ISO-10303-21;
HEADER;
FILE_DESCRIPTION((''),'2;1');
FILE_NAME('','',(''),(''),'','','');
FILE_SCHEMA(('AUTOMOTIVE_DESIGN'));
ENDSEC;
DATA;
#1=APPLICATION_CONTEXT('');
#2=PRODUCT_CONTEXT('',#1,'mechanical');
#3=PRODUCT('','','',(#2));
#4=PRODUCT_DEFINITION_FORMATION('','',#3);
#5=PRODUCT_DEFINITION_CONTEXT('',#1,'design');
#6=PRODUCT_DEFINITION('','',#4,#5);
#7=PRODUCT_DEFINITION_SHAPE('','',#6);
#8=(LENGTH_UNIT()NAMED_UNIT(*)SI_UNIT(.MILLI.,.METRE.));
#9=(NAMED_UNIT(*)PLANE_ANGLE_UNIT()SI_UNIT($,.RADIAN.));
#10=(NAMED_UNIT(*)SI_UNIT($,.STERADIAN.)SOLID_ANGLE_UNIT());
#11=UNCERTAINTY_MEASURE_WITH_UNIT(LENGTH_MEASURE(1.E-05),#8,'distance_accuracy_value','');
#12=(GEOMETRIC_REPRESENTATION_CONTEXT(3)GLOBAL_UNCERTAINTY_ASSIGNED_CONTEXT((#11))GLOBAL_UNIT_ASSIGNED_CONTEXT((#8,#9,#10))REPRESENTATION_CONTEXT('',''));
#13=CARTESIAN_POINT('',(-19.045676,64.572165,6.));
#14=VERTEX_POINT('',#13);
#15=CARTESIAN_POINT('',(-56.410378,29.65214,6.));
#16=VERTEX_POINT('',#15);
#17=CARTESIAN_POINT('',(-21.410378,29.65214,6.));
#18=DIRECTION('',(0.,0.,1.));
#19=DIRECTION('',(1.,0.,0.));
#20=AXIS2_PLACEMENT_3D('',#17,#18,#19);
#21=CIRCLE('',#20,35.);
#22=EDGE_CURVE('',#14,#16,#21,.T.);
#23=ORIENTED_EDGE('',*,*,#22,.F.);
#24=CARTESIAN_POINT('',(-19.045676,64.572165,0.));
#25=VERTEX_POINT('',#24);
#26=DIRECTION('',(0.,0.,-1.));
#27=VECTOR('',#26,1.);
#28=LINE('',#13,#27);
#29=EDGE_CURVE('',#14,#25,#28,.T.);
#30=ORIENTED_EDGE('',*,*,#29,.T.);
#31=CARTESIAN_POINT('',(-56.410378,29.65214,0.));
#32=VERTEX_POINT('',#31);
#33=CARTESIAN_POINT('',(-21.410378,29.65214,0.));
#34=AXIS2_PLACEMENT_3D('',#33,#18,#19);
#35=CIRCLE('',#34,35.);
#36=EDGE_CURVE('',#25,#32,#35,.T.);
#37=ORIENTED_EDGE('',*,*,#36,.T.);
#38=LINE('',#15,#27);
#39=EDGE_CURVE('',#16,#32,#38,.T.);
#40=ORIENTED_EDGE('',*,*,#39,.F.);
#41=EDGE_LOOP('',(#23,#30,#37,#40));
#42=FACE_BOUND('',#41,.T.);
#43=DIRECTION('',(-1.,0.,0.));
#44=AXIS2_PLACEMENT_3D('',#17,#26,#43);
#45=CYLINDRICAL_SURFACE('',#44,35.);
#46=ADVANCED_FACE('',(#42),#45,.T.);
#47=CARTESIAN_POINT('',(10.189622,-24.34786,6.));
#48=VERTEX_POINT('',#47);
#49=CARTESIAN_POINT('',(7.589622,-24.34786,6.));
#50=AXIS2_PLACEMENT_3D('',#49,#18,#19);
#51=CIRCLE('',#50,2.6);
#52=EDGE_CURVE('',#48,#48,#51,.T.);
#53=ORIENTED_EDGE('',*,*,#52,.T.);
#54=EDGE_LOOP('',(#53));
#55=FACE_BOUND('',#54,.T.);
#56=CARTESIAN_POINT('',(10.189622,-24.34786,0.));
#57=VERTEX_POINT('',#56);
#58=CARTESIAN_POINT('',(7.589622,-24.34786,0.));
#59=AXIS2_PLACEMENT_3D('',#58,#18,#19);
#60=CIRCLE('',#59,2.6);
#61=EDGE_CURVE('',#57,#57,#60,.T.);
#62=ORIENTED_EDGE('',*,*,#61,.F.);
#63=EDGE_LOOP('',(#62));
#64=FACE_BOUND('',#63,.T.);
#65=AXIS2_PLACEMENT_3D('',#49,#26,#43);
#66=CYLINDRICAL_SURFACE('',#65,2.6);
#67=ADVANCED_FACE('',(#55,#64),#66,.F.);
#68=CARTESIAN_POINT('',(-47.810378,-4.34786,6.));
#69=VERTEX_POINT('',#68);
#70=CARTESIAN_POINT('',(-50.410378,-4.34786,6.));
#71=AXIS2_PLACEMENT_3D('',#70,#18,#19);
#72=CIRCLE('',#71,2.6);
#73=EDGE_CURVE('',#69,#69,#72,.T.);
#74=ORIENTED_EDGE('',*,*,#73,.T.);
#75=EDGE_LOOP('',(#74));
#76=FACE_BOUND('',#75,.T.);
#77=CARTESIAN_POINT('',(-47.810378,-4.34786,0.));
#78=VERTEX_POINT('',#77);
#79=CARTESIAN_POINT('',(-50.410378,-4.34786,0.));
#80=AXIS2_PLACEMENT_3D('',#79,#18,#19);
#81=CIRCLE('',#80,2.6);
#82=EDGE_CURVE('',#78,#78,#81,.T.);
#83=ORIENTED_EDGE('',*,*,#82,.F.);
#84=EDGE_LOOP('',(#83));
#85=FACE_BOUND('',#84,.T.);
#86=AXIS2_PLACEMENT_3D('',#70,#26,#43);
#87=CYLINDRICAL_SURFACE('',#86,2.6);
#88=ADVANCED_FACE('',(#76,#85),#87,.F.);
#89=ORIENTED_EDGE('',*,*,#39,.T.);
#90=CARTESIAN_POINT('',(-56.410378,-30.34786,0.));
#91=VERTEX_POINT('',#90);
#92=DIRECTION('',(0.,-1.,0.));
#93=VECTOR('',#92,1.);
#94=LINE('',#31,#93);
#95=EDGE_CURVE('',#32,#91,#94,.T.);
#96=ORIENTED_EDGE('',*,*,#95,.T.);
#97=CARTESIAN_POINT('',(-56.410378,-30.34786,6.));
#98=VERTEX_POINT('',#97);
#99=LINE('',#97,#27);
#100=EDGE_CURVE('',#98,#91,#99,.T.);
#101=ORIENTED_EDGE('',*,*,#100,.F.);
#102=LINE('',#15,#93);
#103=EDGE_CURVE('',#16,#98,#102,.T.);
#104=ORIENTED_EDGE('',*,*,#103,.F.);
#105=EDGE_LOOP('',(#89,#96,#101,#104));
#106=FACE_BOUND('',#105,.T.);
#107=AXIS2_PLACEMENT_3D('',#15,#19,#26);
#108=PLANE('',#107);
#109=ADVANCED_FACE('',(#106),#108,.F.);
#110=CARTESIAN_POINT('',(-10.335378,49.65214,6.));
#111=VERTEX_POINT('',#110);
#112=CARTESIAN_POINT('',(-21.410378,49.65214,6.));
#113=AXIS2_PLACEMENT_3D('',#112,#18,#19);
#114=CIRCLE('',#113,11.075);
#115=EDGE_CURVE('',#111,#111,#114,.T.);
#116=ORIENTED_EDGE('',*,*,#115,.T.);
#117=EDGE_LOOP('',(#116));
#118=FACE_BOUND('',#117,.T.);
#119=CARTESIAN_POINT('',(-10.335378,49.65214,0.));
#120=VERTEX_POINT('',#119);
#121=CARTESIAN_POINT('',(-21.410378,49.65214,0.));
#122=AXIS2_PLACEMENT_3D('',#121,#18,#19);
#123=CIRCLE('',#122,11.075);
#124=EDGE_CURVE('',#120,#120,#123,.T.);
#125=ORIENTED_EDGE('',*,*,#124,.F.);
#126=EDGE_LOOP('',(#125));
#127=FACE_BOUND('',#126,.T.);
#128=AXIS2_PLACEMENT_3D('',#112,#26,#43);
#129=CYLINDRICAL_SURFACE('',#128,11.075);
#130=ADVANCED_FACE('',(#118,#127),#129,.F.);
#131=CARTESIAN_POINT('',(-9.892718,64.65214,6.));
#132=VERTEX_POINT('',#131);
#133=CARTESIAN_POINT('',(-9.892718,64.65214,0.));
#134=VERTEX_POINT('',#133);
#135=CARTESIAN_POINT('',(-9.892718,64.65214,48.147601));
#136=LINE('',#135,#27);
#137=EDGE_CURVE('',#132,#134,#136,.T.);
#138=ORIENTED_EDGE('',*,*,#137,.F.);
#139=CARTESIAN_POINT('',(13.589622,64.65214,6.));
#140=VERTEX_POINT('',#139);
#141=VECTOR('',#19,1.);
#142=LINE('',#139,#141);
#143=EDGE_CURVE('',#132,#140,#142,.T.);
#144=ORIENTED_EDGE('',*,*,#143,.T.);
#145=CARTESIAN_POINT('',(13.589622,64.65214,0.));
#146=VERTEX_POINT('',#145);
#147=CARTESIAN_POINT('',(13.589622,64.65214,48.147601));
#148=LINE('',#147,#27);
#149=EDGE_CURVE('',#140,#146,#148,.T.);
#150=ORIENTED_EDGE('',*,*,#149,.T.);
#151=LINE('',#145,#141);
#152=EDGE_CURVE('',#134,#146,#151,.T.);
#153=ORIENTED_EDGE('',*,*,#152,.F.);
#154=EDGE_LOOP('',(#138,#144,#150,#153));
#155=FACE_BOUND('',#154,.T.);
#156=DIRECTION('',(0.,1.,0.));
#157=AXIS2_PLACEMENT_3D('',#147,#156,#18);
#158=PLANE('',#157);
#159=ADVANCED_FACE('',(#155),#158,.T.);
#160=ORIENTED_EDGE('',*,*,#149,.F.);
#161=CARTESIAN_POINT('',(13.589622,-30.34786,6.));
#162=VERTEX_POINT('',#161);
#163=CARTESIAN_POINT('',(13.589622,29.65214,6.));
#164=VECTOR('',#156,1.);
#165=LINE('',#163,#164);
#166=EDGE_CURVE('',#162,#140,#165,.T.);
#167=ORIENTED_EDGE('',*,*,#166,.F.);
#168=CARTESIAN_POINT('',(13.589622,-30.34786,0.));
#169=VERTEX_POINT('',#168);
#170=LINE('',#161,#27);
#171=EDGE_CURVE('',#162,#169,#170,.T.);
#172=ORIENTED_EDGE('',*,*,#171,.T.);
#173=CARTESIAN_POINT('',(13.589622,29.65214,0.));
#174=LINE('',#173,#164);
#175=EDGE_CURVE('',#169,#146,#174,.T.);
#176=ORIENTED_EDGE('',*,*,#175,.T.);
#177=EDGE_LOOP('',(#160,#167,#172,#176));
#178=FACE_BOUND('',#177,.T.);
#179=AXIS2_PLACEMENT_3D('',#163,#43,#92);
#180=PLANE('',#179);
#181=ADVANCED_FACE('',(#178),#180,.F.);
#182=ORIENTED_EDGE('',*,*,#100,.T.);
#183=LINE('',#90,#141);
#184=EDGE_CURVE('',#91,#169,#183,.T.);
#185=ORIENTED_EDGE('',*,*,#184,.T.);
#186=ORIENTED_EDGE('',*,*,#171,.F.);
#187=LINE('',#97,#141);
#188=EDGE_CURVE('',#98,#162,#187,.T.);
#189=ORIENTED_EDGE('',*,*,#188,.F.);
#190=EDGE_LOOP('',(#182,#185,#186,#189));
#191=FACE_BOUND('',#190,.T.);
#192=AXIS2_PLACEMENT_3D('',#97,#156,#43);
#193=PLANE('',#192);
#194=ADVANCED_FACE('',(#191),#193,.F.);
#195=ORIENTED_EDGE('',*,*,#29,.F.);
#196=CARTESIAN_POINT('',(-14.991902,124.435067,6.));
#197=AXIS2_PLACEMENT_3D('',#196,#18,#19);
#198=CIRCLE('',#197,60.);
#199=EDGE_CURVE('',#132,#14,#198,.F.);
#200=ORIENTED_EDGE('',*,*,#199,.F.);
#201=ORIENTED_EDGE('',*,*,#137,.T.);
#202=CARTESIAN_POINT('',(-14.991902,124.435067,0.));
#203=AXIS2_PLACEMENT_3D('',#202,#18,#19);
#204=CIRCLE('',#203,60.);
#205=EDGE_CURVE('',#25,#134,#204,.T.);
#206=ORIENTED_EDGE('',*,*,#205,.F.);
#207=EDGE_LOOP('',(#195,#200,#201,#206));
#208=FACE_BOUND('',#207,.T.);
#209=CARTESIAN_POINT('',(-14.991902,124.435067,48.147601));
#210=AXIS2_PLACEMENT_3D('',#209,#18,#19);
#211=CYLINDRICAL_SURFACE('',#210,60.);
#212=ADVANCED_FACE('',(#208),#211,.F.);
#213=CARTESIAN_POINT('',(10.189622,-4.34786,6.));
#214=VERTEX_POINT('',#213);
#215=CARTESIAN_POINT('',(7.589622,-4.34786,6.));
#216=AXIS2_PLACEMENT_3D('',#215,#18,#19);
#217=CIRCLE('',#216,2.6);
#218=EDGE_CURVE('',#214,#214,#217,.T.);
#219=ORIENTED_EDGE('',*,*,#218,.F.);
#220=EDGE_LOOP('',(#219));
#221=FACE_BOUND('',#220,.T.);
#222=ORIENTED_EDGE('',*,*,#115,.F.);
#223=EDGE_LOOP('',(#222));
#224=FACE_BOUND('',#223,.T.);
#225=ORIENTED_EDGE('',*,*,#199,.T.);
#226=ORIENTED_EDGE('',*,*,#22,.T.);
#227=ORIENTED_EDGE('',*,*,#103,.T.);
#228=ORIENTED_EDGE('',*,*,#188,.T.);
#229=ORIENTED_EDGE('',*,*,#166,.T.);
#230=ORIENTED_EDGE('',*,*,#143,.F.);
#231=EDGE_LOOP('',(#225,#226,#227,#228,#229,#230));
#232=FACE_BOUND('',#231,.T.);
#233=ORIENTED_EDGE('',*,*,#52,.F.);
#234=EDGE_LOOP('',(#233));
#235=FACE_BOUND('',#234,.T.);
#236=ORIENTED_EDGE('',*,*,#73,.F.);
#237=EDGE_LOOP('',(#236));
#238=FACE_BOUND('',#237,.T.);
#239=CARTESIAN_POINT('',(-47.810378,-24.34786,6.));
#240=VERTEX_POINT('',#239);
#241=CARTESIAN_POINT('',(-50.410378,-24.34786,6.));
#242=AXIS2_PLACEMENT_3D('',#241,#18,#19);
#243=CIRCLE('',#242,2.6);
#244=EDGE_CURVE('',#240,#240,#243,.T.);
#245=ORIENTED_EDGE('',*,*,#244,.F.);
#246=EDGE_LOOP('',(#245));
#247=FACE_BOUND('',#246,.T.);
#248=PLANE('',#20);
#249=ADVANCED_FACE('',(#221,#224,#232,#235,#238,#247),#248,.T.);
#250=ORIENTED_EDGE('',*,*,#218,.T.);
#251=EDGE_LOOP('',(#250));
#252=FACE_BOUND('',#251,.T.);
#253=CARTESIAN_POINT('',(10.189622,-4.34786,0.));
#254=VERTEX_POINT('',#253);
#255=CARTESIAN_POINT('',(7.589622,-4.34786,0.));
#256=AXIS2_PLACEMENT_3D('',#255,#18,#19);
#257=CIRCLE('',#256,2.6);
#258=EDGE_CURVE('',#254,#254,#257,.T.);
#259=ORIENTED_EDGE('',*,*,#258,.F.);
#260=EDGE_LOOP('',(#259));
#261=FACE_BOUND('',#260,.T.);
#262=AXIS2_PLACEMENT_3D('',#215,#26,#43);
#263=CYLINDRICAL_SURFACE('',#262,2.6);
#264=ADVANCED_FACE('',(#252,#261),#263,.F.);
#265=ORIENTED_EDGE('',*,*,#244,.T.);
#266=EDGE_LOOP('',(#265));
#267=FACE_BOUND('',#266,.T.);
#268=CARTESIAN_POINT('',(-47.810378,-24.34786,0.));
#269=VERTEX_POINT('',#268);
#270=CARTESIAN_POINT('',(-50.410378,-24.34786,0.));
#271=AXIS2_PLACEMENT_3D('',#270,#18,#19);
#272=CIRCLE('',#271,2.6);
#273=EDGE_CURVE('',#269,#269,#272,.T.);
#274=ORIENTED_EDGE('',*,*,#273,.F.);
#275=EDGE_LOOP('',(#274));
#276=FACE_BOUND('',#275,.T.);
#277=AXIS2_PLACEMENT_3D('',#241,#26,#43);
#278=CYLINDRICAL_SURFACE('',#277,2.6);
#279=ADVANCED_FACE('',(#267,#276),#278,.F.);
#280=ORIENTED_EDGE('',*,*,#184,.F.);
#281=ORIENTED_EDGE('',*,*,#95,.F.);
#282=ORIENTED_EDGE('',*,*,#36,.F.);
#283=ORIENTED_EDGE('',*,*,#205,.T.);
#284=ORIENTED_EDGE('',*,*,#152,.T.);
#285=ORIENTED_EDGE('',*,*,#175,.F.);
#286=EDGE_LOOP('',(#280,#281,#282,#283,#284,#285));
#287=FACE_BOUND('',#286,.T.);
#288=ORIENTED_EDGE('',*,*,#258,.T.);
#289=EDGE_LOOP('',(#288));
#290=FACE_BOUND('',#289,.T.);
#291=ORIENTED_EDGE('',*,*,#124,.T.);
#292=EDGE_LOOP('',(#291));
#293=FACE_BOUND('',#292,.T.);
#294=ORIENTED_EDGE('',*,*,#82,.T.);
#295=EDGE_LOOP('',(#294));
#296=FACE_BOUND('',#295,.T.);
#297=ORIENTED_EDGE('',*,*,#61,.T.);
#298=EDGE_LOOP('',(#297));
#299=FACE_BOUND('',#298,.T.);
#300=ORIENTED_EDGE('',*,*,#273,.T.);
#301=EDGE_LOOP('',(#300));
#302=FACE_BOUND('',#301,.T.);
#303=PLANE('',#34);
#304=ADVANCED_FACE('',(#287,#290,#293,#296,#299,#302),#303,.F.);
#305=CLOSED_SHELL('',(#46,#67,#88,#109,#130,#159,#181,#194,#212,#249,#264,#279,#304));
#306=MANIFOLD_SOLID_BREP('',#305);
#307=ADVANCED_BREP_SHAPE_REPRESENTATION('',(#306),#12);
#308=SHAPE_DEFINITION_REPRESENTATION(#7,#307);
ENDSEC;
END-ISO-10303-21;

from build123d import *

# Parameters (mm, degrees)
IZIM1_R                     = 11.075
IZIM1_R_2                   = 2.6
Y_KSEKLIK_EKSTR_ZYON1_DEPTH = 6
IZIM2_W                     = 40.176949225
IZIM2_H                     = 32.938980449
Y_KSEKLIK_EKSTR_ZYON2_DEPTH = 6
IZIM3_W                     = 23.482339904
IZIM3_H                     = 35
Y_KSEKLIK_EKSTR_ZYON3_DEPTH = 6
RADYUS1_R                   = 60


with BuildPart() as part:
    # Çizim1 → Yükseklik-Ekstrüzyon1 (new body)
    with BuildSketch(Plane.XY):
        with BuildLine():
            Line((-56.410377678, 29.652139902), (-56.410377678, -30.347860098))
            Line((-56.410377678, -30.347860098), (13.589622322, -30.347860098))
            Line((13.589622322, -30.347860098), (13.589622322, 29.652139902))
            ThreePointArc((13.589622322, 29.652139902), (-21.410377678, 64.652139902), (-56.410377678, 29.652139902))
        make_face()
        with Locations((-21.410377678, 49.652139902)):
            Circle(IZIM1_R, mode=Mode.SUBTRACT)
        with Locations((-50.410377678, -24.347860098)):
            Circle(IZIM1_R_2, mode=Mode.SUBTRACT)
        with Locations((7.589622322, -24.347860098)):
            Circle(IZIM1_R_2, mode=Mode.SUBTRACT)
        with Locations((-50.410377678, -4.347860098)):
            Circle(IZIM1_R_2, mode=Mode.SUBTRACT)
        with Locations((7.589622322, -4.347860098)):
            Circle(IZIM1_R_2, mode=Mode.SUBTRACT)
        with BuildLine():
            Line((-12.410377678, 4.652139902), (-12.410377678, -5.347860098))
            ThreePointArc((-12.410377678, -5.347860098), (-21.410377678, -14.347860098), (-30.410377678, -5.347860098))
            Line((-30.410377678, -5.347860098), (-30.410377678, 4.652139902))
            ThreePointArc((-30.410377678, 4.652139902), (-21.410377678, 13.652139902), (-12.410377678, 4.652139902))
        make_face(mode=Mode.SUBTRACT)
        with BuildLine():
            Line((-33.810377678, 4.652139902), (-33.810377678, -5.347860098))
            ThreePointArc((-33.810377678, -5.347860098), (-35.910377678, -7.447860098), (-38.010377678, -5.347860098))
            Line((-38.010377678, -5.347860098), (-38.010377678, 4.652139902))
            ThreePointArc((-38.010377678, 4.652139902), (-35.910377678, 6.752139902), (-33.810377678, 4.652139902))
        make_face(mode=Mode.SUBTRACT)
        with BuildLine():
            Line((-4.810377678, 4.652139902), (-4.810377678, -5.347860098))
            ThreePointArc((-4.810377678, -5.347860098), (-6.910377678, -7.447860098), (-9.010377678, -5.347860098))
            Line((-9.010377678, -5.347860098), (-9.010377678, 4.652139902))
            ThreePointArc((-9.010377678, 4.652139902), (-6.910377678, 6.752139902), (-4.810377678, 4.652139902))
        make_face(mode=Mode.SUBTRACT)
    extrude(amount=Y_KSEKLIK_EKSTR_ZYON1_DEPTH)

    # Çizim2 → Yükseklik-Ekstrüzyon2 (add)
    with BuildSketch(Plane(origin=(0, 0, 0), x_dir=(-1, 0, 0), z_dir=(0, 0, -1))):
        with Locations((20.088474613, 1.726881697)):
            Rectangle(IZIM2_W, IZIM2_H)
    extrude(amount=-Y_KSEKLIK_EKSTR_ZYON2_DEPTH)

    # Çizim3 → Yükseklik-Ekstrüzyon3 (add)
    with BuildSketch(Plane(origin=(0, 0, 0), x_dir=(-1, 0, 0), z_dir=(0, 0, -1))):
        with Locations((-1.84845237, 47.152139902)):
            Rectangle(IZIM3_W, IZIM3_H)
    extrude(amount=-Y_KSEKLIK_EKSTR_ZYON3_DEPTH)

    # Radyus1
    # the kernel refuses this fillet: 60 mm, written as the material it adds along each edge
    with BuildSketch(Plane(origin=(-9.892717582, 62.702760258, 6), x_dir=(0, 1, 0), z_dir=(0, 0, -1))) as radyus1_piece_1:
        with BuildLine():
            CenterArc((61.73230625, -5.099184882), RADYUS1_R, 175.124756337, 8.749263652)
            Line((1.869405236, -9.152958702), (0.672147215, -9.234034178))
            ThreePointArc((0.672147215, -9.234034178), (0.065725416, -4.753959725), (-1.133164126, -0.394891203))
            Line((-1.133164126, -0.394891203), (0, 1.2))
            ThreePointArc((0, 1.2), (0.974689822, 1.2), (0.753721112, 0.101983698))
            Line((0.753721112, 0.101983698), (1.949379644, 0))
        make_face()
    extrude(amount=6)


solid = part.part
